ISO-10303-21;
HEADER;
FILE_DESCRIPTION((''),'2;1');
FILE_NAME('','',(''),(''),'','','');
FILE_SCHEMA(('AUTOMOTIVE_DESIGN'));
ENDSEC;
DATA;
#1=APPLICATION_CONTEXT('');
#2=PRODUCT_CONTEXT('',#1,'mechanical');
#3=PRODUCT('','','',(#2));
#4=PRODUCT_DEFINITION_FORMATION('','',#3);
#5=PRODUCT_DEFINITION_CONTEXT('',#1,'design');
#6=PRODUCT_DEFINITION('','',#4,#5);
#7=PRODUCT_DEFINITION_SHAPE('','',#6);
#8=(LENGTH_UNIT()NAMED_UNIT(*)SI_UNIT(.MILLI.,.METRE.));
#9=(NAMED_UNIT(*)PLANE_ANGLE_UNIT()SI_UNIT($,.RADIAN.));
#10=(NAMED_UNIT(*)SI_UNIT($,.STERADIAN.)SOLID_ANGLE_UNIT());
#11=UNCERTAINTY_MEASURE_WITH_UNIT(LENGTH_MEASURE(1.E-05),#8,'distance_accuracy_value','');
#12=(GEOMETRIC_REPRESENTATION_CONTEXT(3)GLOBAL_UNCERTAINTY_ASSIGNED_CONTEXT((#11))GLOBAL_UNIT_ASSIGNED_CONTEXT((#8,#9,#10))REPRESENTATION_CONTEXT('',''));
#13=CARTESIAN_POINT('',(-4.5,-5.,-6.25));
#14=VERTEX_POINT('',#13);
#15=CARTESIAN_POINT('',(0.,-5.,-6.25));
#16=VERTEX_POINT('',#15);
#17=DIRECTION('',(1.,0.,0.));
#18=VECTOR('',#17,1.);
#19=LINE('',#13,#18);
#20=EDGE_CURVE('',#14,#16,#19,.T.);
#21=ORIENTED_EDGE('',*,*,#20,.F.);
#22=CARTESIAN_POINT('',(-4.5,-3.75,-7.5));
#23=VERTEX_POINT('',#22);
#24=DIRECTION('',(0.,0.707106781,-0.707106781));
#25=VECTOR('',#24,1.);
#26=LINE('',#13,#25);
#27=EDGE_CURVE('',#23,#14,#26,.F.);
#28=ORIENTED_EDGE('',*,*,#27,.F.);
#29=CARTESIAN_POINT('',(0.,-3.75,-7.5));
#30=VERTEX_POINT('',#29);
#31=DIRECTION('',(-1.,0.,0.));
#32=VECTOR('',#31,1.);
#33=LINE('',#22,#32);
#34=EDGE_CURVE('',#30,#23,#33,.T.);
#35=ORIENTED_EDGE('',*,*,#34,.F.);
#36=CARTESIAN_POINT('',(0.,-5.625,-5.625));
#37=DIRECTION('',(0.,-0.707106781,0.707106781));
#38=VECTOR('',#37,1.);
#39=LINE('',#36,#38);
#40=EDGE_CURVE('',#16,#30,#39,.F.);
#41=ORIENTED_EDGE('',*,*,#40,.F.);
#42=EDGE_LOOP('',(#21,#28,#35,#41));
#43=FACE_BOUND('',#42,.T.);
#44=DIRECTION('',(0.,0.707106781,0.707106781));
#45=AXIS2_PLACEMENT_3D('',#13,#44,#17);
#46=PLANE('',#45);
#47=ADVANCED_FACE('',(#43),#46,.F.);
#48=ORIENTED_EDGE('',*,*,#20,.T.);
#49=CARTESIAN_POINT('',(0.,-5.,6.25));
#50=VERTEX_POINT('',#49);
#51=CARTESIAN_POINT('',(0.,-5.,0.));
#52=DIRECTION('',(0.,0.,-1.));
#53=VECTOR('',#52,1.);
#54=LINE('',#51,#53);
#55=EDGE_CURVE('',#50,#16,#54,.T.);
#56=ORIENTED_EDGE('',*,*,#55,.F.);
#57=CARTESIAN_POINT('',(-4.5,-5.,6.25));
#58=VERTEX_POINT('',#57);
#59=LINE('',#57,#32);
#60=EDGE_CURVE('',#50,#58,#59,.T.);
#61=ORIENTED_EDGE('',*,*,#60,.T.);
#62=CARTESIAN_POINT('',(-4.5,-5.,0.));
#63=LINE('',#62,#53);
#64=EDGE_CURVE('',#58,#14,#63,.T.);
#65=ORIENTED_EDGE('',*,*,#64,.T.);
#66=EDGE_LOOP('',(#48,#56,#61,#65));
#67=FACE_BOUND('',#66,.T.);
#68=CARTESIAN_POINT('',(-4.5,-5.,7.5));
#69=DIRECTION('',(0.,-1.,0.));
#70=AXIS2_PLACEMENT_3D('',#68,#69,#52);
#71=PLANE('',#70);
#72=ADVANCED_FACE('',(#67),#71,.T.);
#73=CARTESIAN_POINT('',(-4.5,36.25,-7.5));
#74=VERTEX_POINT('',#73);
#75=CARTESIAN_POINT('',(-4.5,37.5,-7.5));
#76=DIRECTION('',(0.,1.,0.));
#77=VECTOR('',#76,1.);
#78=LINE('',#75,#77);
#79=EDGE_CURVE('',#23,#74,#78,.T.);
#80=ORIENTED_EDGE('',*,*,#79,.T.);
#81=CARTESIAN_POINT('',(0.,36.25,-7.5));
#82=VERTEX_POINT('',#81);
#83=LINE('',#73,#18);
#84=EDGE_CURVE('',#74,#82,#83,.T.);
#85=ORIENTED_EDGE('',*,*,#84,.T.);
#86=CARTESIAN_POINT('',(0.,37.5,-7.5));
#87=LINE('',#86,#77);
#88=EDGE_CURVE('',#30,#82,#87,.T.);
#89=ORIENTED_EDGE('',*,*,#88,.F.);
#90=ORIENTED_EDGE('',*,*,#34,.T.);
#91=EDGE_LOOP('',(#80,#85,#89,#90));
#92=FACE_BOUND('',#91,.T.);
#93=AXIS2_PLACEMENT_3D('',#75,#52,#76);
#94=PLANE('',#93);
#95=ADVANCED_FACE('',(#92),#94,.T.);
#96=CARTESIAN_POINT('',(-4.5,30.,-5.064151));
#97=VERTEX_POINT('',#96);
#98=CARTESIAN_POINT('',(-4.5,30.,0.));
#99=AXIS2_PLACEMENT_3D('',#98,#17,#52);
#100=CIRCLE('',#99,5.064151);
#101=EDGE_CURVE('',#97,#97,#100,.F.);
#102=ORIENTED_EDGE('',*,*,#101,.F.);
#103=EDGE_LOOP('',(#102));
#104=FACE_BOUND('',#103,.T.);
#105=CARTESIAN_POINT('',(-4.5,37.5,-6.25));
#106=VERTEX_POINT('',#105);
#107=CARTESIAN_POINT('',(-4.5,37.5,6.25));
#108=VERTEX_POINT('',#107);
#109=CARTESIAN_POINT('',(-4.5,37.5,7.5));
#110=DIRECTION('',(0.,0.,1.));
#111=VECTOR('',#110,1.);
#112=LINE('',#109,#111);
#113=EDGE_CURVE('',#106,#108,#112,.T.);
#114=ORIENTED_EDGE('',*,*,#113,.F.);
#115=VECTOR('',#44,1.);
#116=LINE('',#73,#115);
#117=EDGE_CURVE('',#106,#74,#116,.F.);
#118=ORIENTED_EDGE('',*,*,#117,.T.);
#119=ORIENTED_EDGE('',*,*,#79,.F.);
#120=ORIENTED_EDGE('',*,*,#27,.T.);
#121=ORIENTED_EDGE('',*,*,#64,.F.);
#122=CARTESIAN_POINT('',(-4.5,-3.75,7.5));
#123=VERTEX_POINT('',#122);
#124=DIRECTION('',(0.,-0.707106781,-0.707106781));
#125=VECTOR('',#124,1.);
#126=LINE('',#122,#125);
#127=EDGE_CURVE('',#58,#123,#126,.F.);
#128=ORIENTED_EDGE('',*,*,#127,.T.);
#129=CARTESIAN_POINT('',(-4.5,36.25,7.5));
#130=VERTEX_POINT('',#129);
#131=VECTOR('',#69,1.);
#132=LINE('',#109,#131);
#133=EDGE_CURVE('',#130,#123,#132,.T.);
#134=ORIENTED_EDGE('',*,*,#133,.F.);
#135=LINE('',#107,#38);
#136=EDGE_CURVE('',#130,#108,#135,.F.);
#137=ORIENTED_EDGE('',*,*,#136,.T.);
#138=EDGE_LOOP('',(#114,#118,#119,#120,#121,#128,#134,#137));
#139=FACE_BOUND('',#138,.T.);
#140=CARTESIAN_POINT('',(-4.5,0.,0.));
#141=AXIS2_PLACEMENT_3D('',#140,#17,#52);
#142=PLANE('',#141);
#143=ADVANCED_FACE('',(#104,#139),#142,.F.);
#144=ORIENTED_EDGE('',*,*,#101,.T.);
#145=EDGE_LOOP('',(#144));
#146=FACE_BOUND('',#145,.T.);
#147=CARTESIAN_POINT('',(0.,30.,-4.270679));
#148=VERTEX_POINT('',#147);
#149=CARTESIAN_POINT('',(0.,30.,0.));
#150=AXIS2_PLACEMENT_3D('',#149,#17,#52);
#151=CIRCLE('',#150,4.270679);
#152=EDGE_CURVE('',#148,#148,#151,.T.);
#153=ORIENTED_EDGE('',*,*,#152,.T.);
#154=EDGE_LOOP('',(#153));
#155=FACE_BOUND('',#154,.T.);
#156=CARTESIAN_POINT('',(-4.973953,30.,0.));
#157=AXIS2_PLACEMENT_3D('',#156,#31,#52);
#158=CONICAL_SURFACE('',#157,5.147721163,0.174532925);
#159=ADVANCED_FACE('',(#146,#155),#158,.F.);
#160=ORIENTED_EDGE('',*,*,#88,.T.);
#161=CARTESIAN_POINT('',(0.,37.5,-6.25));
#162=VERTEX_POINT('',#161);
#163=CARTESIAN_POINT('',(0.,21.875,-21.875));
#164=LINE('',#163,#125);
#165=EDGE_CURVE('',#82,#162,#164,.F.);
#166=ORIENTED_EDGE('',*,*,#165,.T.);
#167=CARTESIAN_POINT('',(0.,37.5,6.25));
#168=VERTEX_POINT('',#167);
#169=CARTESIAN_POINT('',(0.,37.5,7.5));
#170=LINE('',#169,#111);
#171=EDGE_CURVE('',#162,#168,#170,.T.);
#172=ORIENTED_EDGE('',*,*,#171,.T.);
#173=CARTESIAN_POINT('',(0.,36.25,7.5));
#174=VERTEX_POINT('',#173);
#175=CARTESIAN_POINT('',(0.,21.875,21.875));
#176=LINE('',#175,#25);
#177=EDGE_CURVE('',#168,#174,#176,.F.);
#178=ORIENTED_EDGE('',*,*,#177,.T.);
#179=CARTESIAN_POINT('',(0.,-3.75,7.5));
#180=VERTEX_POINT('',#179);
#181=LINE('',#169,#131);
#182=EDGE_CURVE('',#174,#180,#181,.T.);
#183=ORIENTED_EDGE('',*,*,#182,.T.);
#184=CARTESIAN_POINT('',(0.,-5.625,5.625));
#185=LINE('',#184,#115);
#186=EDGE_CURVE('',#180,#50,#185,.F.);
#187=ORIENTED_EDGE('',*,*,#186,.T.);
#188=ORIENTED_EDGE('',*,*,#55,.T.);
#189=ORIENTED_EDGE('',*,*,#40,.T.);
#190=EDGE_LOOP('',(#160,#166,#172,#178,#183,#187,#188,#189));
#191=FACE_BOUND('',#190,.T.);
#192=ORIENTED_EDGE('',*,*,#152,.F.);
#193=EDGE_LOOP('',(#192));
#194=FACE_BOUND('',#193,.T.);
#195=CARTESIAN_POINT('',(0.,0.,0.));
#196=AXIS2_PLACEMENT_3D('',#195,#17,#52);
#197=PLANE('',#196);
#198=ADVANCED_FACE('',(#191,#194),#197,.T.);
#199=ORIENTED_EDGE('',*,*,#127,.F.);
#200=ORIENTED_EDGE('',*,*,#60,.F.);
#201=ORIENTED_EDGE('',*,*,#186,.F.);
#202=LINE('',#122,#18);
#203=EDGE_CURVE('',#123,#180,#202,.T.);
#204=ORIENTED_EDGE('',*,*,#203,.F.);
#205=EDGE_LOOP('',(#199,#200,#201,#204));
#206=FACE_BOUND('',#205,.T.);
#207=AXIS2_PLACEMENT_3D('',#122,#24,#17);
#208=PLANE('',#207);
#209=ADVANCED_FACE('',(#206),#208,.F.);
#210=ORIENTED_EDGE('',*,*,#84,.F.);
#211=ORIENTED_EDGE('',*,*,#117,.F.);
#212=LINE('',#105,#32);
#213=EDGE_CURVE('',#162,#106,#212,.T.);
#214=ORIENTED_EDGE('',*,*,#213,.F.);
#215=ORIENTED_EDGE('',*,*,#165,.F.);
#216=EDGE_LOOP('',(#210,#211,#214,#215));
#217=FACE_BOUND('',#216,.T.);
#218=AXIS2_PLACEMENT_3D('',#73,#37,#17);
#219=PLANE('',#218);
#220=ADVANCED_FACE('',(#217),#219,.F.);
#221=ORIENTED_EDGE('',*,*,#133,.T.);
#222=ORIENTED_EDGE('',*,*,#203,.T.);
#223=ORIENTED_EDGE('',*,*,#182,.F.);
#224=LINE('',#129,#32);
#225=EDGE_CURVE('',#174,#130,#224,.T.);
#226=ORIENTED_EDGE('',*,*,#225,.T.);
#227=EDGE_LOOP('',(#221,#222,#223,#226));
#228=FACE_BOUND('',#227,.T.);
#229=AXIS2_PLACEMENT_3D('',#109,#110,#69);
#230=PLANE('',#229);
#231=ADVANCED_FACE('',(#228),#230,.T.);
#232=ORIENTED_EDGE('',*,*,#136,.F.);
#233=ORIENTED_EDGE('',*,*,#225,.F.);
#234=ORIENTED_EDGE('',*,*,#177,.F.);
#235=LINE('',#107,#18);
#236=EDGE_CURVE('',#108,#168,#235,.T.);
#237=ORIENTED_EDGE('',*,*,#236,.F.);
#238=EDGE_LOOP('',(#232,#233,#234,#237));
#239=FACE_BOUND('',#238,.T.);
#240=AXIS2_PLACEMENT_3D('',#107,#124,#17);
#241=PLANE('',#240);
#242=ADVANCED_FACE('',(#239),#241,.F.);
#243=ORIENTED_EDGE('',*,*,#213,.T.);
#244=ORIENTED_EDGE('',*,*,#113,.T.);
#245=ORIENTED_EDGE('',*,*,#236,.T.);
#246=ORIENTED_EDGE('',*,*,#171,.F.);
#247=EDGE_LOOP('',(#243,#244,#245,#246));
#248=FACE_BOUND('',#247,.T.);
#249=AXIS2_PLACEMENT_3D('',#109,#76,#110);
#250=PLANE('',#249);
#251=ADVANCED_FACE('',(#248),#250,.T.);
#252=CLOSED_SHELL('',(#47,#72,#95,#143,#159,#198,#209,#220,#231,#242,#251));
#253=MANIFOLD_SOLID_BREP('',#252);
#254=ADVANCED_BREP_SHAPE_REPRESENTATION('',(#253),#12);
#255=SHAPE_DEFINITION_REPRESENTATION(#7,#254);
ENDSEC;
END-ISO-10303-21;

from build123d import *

# Parameters (mm, degrees)
SKETCH1_W                               = 15
SKETCH1_H                               = 37.5
BOSS_EXTRUDE1_DEPTH                     = 4.5
SKETCH2_R                               = 5
CUT_EXTRUDE1_DEPTH                      = 5
CUT_EXTRUDE1_TAPER                      = 10
CUT_EXTRUDE1_OTHER_WAY_DEPTH            = 39.568121551
OFFSET_TO_ACCOUNT_FOR_BASE_THICKNESS_BY = 5
CHAMFER1_SIZE                           = 1.25


# Read off the part's stored shape, not the designer's step: Offset for 3D print
with BuildPart() as part:
    # Sketch1 → Boss-Extrude1 (new body)
    with BuildSketch(Plane(origin=(0, 0, 0), x_dir=(0, 0, -1), z_dir=(1, 0, 0))):
        with Locations((0, 18.75)):
            Rectangle(SKETCH1_W, SKETCH1_H)
    extrude(amount=-BOSS_EXTRUDE1_DEPTH)

    # Sketch2 → Cut-Extrude1 (cut)
    with BuildSketch(Plane(origin=(-5, 0, 0), x_dir=(0, 0, -1), z_dir=(1, 0, 0))):
        with Locations((0, 30)):
            Circle(SKETCH2_R)
    extrude(amount=CUT_EXTRUDE1_DEPTH, taper=CUT_EXTRUDE1_TAPER, mode=Mode.SUBTRACT)

    # Sketch2 → Cut-Extrude1 other way (cut)
    with BuildSketch(Plane(origin=(-5, 0, 0), x_dir=(0, 0, -1), z_dir=(1, 0, 0))):
        with Locations((0, 30)):
            Circle(SKETCH2_R)
    extrude(amount=-CUT_EXTRUDE1_OTHER_WAY_DEPTH, mode=Mode.SUBTRACT)

    # Offset to account for Base Thickness: a face moved outward by 5.0
    extrude(part.faces().sort_by_distance((-2.25, 0, 0))[0], amount=OFFSET_TO_ACCOUNT_FOR_BASE_THICKNESS_BY, dir=(0, -1, 0))

    # Chamfer1
    chamfer1_edges = [part.edges().sort_by_distance(p)[0] for p in [
        (-2.25, -5, -7.5),
        (-2.25, -5, 7.5),
        (-2.25, 37.5, 7.5),
        (-2.25, 37.5, -7.5),
    ]]
    chamfer(chamfer1_edges, length=CHAMFER1_SIZE)

    # Offset for 3D print outline → Offset for 3D print (revolve, cut)
    with BuildSketch(Plane(origin=(0, 30, 0), x_dir=(0, 1, 0), z_dir=(0, 0, -1))):
        Polygon((4.118365096, 0), (4.91183651, -4.5), (5.064150501, -4.5), (4.270679088, 0), align=None)
    revolve(axis=Axis((0, 30, 0), (1, 0, 0)), mode=Mode.SUBTRACT)


solid = part.part
